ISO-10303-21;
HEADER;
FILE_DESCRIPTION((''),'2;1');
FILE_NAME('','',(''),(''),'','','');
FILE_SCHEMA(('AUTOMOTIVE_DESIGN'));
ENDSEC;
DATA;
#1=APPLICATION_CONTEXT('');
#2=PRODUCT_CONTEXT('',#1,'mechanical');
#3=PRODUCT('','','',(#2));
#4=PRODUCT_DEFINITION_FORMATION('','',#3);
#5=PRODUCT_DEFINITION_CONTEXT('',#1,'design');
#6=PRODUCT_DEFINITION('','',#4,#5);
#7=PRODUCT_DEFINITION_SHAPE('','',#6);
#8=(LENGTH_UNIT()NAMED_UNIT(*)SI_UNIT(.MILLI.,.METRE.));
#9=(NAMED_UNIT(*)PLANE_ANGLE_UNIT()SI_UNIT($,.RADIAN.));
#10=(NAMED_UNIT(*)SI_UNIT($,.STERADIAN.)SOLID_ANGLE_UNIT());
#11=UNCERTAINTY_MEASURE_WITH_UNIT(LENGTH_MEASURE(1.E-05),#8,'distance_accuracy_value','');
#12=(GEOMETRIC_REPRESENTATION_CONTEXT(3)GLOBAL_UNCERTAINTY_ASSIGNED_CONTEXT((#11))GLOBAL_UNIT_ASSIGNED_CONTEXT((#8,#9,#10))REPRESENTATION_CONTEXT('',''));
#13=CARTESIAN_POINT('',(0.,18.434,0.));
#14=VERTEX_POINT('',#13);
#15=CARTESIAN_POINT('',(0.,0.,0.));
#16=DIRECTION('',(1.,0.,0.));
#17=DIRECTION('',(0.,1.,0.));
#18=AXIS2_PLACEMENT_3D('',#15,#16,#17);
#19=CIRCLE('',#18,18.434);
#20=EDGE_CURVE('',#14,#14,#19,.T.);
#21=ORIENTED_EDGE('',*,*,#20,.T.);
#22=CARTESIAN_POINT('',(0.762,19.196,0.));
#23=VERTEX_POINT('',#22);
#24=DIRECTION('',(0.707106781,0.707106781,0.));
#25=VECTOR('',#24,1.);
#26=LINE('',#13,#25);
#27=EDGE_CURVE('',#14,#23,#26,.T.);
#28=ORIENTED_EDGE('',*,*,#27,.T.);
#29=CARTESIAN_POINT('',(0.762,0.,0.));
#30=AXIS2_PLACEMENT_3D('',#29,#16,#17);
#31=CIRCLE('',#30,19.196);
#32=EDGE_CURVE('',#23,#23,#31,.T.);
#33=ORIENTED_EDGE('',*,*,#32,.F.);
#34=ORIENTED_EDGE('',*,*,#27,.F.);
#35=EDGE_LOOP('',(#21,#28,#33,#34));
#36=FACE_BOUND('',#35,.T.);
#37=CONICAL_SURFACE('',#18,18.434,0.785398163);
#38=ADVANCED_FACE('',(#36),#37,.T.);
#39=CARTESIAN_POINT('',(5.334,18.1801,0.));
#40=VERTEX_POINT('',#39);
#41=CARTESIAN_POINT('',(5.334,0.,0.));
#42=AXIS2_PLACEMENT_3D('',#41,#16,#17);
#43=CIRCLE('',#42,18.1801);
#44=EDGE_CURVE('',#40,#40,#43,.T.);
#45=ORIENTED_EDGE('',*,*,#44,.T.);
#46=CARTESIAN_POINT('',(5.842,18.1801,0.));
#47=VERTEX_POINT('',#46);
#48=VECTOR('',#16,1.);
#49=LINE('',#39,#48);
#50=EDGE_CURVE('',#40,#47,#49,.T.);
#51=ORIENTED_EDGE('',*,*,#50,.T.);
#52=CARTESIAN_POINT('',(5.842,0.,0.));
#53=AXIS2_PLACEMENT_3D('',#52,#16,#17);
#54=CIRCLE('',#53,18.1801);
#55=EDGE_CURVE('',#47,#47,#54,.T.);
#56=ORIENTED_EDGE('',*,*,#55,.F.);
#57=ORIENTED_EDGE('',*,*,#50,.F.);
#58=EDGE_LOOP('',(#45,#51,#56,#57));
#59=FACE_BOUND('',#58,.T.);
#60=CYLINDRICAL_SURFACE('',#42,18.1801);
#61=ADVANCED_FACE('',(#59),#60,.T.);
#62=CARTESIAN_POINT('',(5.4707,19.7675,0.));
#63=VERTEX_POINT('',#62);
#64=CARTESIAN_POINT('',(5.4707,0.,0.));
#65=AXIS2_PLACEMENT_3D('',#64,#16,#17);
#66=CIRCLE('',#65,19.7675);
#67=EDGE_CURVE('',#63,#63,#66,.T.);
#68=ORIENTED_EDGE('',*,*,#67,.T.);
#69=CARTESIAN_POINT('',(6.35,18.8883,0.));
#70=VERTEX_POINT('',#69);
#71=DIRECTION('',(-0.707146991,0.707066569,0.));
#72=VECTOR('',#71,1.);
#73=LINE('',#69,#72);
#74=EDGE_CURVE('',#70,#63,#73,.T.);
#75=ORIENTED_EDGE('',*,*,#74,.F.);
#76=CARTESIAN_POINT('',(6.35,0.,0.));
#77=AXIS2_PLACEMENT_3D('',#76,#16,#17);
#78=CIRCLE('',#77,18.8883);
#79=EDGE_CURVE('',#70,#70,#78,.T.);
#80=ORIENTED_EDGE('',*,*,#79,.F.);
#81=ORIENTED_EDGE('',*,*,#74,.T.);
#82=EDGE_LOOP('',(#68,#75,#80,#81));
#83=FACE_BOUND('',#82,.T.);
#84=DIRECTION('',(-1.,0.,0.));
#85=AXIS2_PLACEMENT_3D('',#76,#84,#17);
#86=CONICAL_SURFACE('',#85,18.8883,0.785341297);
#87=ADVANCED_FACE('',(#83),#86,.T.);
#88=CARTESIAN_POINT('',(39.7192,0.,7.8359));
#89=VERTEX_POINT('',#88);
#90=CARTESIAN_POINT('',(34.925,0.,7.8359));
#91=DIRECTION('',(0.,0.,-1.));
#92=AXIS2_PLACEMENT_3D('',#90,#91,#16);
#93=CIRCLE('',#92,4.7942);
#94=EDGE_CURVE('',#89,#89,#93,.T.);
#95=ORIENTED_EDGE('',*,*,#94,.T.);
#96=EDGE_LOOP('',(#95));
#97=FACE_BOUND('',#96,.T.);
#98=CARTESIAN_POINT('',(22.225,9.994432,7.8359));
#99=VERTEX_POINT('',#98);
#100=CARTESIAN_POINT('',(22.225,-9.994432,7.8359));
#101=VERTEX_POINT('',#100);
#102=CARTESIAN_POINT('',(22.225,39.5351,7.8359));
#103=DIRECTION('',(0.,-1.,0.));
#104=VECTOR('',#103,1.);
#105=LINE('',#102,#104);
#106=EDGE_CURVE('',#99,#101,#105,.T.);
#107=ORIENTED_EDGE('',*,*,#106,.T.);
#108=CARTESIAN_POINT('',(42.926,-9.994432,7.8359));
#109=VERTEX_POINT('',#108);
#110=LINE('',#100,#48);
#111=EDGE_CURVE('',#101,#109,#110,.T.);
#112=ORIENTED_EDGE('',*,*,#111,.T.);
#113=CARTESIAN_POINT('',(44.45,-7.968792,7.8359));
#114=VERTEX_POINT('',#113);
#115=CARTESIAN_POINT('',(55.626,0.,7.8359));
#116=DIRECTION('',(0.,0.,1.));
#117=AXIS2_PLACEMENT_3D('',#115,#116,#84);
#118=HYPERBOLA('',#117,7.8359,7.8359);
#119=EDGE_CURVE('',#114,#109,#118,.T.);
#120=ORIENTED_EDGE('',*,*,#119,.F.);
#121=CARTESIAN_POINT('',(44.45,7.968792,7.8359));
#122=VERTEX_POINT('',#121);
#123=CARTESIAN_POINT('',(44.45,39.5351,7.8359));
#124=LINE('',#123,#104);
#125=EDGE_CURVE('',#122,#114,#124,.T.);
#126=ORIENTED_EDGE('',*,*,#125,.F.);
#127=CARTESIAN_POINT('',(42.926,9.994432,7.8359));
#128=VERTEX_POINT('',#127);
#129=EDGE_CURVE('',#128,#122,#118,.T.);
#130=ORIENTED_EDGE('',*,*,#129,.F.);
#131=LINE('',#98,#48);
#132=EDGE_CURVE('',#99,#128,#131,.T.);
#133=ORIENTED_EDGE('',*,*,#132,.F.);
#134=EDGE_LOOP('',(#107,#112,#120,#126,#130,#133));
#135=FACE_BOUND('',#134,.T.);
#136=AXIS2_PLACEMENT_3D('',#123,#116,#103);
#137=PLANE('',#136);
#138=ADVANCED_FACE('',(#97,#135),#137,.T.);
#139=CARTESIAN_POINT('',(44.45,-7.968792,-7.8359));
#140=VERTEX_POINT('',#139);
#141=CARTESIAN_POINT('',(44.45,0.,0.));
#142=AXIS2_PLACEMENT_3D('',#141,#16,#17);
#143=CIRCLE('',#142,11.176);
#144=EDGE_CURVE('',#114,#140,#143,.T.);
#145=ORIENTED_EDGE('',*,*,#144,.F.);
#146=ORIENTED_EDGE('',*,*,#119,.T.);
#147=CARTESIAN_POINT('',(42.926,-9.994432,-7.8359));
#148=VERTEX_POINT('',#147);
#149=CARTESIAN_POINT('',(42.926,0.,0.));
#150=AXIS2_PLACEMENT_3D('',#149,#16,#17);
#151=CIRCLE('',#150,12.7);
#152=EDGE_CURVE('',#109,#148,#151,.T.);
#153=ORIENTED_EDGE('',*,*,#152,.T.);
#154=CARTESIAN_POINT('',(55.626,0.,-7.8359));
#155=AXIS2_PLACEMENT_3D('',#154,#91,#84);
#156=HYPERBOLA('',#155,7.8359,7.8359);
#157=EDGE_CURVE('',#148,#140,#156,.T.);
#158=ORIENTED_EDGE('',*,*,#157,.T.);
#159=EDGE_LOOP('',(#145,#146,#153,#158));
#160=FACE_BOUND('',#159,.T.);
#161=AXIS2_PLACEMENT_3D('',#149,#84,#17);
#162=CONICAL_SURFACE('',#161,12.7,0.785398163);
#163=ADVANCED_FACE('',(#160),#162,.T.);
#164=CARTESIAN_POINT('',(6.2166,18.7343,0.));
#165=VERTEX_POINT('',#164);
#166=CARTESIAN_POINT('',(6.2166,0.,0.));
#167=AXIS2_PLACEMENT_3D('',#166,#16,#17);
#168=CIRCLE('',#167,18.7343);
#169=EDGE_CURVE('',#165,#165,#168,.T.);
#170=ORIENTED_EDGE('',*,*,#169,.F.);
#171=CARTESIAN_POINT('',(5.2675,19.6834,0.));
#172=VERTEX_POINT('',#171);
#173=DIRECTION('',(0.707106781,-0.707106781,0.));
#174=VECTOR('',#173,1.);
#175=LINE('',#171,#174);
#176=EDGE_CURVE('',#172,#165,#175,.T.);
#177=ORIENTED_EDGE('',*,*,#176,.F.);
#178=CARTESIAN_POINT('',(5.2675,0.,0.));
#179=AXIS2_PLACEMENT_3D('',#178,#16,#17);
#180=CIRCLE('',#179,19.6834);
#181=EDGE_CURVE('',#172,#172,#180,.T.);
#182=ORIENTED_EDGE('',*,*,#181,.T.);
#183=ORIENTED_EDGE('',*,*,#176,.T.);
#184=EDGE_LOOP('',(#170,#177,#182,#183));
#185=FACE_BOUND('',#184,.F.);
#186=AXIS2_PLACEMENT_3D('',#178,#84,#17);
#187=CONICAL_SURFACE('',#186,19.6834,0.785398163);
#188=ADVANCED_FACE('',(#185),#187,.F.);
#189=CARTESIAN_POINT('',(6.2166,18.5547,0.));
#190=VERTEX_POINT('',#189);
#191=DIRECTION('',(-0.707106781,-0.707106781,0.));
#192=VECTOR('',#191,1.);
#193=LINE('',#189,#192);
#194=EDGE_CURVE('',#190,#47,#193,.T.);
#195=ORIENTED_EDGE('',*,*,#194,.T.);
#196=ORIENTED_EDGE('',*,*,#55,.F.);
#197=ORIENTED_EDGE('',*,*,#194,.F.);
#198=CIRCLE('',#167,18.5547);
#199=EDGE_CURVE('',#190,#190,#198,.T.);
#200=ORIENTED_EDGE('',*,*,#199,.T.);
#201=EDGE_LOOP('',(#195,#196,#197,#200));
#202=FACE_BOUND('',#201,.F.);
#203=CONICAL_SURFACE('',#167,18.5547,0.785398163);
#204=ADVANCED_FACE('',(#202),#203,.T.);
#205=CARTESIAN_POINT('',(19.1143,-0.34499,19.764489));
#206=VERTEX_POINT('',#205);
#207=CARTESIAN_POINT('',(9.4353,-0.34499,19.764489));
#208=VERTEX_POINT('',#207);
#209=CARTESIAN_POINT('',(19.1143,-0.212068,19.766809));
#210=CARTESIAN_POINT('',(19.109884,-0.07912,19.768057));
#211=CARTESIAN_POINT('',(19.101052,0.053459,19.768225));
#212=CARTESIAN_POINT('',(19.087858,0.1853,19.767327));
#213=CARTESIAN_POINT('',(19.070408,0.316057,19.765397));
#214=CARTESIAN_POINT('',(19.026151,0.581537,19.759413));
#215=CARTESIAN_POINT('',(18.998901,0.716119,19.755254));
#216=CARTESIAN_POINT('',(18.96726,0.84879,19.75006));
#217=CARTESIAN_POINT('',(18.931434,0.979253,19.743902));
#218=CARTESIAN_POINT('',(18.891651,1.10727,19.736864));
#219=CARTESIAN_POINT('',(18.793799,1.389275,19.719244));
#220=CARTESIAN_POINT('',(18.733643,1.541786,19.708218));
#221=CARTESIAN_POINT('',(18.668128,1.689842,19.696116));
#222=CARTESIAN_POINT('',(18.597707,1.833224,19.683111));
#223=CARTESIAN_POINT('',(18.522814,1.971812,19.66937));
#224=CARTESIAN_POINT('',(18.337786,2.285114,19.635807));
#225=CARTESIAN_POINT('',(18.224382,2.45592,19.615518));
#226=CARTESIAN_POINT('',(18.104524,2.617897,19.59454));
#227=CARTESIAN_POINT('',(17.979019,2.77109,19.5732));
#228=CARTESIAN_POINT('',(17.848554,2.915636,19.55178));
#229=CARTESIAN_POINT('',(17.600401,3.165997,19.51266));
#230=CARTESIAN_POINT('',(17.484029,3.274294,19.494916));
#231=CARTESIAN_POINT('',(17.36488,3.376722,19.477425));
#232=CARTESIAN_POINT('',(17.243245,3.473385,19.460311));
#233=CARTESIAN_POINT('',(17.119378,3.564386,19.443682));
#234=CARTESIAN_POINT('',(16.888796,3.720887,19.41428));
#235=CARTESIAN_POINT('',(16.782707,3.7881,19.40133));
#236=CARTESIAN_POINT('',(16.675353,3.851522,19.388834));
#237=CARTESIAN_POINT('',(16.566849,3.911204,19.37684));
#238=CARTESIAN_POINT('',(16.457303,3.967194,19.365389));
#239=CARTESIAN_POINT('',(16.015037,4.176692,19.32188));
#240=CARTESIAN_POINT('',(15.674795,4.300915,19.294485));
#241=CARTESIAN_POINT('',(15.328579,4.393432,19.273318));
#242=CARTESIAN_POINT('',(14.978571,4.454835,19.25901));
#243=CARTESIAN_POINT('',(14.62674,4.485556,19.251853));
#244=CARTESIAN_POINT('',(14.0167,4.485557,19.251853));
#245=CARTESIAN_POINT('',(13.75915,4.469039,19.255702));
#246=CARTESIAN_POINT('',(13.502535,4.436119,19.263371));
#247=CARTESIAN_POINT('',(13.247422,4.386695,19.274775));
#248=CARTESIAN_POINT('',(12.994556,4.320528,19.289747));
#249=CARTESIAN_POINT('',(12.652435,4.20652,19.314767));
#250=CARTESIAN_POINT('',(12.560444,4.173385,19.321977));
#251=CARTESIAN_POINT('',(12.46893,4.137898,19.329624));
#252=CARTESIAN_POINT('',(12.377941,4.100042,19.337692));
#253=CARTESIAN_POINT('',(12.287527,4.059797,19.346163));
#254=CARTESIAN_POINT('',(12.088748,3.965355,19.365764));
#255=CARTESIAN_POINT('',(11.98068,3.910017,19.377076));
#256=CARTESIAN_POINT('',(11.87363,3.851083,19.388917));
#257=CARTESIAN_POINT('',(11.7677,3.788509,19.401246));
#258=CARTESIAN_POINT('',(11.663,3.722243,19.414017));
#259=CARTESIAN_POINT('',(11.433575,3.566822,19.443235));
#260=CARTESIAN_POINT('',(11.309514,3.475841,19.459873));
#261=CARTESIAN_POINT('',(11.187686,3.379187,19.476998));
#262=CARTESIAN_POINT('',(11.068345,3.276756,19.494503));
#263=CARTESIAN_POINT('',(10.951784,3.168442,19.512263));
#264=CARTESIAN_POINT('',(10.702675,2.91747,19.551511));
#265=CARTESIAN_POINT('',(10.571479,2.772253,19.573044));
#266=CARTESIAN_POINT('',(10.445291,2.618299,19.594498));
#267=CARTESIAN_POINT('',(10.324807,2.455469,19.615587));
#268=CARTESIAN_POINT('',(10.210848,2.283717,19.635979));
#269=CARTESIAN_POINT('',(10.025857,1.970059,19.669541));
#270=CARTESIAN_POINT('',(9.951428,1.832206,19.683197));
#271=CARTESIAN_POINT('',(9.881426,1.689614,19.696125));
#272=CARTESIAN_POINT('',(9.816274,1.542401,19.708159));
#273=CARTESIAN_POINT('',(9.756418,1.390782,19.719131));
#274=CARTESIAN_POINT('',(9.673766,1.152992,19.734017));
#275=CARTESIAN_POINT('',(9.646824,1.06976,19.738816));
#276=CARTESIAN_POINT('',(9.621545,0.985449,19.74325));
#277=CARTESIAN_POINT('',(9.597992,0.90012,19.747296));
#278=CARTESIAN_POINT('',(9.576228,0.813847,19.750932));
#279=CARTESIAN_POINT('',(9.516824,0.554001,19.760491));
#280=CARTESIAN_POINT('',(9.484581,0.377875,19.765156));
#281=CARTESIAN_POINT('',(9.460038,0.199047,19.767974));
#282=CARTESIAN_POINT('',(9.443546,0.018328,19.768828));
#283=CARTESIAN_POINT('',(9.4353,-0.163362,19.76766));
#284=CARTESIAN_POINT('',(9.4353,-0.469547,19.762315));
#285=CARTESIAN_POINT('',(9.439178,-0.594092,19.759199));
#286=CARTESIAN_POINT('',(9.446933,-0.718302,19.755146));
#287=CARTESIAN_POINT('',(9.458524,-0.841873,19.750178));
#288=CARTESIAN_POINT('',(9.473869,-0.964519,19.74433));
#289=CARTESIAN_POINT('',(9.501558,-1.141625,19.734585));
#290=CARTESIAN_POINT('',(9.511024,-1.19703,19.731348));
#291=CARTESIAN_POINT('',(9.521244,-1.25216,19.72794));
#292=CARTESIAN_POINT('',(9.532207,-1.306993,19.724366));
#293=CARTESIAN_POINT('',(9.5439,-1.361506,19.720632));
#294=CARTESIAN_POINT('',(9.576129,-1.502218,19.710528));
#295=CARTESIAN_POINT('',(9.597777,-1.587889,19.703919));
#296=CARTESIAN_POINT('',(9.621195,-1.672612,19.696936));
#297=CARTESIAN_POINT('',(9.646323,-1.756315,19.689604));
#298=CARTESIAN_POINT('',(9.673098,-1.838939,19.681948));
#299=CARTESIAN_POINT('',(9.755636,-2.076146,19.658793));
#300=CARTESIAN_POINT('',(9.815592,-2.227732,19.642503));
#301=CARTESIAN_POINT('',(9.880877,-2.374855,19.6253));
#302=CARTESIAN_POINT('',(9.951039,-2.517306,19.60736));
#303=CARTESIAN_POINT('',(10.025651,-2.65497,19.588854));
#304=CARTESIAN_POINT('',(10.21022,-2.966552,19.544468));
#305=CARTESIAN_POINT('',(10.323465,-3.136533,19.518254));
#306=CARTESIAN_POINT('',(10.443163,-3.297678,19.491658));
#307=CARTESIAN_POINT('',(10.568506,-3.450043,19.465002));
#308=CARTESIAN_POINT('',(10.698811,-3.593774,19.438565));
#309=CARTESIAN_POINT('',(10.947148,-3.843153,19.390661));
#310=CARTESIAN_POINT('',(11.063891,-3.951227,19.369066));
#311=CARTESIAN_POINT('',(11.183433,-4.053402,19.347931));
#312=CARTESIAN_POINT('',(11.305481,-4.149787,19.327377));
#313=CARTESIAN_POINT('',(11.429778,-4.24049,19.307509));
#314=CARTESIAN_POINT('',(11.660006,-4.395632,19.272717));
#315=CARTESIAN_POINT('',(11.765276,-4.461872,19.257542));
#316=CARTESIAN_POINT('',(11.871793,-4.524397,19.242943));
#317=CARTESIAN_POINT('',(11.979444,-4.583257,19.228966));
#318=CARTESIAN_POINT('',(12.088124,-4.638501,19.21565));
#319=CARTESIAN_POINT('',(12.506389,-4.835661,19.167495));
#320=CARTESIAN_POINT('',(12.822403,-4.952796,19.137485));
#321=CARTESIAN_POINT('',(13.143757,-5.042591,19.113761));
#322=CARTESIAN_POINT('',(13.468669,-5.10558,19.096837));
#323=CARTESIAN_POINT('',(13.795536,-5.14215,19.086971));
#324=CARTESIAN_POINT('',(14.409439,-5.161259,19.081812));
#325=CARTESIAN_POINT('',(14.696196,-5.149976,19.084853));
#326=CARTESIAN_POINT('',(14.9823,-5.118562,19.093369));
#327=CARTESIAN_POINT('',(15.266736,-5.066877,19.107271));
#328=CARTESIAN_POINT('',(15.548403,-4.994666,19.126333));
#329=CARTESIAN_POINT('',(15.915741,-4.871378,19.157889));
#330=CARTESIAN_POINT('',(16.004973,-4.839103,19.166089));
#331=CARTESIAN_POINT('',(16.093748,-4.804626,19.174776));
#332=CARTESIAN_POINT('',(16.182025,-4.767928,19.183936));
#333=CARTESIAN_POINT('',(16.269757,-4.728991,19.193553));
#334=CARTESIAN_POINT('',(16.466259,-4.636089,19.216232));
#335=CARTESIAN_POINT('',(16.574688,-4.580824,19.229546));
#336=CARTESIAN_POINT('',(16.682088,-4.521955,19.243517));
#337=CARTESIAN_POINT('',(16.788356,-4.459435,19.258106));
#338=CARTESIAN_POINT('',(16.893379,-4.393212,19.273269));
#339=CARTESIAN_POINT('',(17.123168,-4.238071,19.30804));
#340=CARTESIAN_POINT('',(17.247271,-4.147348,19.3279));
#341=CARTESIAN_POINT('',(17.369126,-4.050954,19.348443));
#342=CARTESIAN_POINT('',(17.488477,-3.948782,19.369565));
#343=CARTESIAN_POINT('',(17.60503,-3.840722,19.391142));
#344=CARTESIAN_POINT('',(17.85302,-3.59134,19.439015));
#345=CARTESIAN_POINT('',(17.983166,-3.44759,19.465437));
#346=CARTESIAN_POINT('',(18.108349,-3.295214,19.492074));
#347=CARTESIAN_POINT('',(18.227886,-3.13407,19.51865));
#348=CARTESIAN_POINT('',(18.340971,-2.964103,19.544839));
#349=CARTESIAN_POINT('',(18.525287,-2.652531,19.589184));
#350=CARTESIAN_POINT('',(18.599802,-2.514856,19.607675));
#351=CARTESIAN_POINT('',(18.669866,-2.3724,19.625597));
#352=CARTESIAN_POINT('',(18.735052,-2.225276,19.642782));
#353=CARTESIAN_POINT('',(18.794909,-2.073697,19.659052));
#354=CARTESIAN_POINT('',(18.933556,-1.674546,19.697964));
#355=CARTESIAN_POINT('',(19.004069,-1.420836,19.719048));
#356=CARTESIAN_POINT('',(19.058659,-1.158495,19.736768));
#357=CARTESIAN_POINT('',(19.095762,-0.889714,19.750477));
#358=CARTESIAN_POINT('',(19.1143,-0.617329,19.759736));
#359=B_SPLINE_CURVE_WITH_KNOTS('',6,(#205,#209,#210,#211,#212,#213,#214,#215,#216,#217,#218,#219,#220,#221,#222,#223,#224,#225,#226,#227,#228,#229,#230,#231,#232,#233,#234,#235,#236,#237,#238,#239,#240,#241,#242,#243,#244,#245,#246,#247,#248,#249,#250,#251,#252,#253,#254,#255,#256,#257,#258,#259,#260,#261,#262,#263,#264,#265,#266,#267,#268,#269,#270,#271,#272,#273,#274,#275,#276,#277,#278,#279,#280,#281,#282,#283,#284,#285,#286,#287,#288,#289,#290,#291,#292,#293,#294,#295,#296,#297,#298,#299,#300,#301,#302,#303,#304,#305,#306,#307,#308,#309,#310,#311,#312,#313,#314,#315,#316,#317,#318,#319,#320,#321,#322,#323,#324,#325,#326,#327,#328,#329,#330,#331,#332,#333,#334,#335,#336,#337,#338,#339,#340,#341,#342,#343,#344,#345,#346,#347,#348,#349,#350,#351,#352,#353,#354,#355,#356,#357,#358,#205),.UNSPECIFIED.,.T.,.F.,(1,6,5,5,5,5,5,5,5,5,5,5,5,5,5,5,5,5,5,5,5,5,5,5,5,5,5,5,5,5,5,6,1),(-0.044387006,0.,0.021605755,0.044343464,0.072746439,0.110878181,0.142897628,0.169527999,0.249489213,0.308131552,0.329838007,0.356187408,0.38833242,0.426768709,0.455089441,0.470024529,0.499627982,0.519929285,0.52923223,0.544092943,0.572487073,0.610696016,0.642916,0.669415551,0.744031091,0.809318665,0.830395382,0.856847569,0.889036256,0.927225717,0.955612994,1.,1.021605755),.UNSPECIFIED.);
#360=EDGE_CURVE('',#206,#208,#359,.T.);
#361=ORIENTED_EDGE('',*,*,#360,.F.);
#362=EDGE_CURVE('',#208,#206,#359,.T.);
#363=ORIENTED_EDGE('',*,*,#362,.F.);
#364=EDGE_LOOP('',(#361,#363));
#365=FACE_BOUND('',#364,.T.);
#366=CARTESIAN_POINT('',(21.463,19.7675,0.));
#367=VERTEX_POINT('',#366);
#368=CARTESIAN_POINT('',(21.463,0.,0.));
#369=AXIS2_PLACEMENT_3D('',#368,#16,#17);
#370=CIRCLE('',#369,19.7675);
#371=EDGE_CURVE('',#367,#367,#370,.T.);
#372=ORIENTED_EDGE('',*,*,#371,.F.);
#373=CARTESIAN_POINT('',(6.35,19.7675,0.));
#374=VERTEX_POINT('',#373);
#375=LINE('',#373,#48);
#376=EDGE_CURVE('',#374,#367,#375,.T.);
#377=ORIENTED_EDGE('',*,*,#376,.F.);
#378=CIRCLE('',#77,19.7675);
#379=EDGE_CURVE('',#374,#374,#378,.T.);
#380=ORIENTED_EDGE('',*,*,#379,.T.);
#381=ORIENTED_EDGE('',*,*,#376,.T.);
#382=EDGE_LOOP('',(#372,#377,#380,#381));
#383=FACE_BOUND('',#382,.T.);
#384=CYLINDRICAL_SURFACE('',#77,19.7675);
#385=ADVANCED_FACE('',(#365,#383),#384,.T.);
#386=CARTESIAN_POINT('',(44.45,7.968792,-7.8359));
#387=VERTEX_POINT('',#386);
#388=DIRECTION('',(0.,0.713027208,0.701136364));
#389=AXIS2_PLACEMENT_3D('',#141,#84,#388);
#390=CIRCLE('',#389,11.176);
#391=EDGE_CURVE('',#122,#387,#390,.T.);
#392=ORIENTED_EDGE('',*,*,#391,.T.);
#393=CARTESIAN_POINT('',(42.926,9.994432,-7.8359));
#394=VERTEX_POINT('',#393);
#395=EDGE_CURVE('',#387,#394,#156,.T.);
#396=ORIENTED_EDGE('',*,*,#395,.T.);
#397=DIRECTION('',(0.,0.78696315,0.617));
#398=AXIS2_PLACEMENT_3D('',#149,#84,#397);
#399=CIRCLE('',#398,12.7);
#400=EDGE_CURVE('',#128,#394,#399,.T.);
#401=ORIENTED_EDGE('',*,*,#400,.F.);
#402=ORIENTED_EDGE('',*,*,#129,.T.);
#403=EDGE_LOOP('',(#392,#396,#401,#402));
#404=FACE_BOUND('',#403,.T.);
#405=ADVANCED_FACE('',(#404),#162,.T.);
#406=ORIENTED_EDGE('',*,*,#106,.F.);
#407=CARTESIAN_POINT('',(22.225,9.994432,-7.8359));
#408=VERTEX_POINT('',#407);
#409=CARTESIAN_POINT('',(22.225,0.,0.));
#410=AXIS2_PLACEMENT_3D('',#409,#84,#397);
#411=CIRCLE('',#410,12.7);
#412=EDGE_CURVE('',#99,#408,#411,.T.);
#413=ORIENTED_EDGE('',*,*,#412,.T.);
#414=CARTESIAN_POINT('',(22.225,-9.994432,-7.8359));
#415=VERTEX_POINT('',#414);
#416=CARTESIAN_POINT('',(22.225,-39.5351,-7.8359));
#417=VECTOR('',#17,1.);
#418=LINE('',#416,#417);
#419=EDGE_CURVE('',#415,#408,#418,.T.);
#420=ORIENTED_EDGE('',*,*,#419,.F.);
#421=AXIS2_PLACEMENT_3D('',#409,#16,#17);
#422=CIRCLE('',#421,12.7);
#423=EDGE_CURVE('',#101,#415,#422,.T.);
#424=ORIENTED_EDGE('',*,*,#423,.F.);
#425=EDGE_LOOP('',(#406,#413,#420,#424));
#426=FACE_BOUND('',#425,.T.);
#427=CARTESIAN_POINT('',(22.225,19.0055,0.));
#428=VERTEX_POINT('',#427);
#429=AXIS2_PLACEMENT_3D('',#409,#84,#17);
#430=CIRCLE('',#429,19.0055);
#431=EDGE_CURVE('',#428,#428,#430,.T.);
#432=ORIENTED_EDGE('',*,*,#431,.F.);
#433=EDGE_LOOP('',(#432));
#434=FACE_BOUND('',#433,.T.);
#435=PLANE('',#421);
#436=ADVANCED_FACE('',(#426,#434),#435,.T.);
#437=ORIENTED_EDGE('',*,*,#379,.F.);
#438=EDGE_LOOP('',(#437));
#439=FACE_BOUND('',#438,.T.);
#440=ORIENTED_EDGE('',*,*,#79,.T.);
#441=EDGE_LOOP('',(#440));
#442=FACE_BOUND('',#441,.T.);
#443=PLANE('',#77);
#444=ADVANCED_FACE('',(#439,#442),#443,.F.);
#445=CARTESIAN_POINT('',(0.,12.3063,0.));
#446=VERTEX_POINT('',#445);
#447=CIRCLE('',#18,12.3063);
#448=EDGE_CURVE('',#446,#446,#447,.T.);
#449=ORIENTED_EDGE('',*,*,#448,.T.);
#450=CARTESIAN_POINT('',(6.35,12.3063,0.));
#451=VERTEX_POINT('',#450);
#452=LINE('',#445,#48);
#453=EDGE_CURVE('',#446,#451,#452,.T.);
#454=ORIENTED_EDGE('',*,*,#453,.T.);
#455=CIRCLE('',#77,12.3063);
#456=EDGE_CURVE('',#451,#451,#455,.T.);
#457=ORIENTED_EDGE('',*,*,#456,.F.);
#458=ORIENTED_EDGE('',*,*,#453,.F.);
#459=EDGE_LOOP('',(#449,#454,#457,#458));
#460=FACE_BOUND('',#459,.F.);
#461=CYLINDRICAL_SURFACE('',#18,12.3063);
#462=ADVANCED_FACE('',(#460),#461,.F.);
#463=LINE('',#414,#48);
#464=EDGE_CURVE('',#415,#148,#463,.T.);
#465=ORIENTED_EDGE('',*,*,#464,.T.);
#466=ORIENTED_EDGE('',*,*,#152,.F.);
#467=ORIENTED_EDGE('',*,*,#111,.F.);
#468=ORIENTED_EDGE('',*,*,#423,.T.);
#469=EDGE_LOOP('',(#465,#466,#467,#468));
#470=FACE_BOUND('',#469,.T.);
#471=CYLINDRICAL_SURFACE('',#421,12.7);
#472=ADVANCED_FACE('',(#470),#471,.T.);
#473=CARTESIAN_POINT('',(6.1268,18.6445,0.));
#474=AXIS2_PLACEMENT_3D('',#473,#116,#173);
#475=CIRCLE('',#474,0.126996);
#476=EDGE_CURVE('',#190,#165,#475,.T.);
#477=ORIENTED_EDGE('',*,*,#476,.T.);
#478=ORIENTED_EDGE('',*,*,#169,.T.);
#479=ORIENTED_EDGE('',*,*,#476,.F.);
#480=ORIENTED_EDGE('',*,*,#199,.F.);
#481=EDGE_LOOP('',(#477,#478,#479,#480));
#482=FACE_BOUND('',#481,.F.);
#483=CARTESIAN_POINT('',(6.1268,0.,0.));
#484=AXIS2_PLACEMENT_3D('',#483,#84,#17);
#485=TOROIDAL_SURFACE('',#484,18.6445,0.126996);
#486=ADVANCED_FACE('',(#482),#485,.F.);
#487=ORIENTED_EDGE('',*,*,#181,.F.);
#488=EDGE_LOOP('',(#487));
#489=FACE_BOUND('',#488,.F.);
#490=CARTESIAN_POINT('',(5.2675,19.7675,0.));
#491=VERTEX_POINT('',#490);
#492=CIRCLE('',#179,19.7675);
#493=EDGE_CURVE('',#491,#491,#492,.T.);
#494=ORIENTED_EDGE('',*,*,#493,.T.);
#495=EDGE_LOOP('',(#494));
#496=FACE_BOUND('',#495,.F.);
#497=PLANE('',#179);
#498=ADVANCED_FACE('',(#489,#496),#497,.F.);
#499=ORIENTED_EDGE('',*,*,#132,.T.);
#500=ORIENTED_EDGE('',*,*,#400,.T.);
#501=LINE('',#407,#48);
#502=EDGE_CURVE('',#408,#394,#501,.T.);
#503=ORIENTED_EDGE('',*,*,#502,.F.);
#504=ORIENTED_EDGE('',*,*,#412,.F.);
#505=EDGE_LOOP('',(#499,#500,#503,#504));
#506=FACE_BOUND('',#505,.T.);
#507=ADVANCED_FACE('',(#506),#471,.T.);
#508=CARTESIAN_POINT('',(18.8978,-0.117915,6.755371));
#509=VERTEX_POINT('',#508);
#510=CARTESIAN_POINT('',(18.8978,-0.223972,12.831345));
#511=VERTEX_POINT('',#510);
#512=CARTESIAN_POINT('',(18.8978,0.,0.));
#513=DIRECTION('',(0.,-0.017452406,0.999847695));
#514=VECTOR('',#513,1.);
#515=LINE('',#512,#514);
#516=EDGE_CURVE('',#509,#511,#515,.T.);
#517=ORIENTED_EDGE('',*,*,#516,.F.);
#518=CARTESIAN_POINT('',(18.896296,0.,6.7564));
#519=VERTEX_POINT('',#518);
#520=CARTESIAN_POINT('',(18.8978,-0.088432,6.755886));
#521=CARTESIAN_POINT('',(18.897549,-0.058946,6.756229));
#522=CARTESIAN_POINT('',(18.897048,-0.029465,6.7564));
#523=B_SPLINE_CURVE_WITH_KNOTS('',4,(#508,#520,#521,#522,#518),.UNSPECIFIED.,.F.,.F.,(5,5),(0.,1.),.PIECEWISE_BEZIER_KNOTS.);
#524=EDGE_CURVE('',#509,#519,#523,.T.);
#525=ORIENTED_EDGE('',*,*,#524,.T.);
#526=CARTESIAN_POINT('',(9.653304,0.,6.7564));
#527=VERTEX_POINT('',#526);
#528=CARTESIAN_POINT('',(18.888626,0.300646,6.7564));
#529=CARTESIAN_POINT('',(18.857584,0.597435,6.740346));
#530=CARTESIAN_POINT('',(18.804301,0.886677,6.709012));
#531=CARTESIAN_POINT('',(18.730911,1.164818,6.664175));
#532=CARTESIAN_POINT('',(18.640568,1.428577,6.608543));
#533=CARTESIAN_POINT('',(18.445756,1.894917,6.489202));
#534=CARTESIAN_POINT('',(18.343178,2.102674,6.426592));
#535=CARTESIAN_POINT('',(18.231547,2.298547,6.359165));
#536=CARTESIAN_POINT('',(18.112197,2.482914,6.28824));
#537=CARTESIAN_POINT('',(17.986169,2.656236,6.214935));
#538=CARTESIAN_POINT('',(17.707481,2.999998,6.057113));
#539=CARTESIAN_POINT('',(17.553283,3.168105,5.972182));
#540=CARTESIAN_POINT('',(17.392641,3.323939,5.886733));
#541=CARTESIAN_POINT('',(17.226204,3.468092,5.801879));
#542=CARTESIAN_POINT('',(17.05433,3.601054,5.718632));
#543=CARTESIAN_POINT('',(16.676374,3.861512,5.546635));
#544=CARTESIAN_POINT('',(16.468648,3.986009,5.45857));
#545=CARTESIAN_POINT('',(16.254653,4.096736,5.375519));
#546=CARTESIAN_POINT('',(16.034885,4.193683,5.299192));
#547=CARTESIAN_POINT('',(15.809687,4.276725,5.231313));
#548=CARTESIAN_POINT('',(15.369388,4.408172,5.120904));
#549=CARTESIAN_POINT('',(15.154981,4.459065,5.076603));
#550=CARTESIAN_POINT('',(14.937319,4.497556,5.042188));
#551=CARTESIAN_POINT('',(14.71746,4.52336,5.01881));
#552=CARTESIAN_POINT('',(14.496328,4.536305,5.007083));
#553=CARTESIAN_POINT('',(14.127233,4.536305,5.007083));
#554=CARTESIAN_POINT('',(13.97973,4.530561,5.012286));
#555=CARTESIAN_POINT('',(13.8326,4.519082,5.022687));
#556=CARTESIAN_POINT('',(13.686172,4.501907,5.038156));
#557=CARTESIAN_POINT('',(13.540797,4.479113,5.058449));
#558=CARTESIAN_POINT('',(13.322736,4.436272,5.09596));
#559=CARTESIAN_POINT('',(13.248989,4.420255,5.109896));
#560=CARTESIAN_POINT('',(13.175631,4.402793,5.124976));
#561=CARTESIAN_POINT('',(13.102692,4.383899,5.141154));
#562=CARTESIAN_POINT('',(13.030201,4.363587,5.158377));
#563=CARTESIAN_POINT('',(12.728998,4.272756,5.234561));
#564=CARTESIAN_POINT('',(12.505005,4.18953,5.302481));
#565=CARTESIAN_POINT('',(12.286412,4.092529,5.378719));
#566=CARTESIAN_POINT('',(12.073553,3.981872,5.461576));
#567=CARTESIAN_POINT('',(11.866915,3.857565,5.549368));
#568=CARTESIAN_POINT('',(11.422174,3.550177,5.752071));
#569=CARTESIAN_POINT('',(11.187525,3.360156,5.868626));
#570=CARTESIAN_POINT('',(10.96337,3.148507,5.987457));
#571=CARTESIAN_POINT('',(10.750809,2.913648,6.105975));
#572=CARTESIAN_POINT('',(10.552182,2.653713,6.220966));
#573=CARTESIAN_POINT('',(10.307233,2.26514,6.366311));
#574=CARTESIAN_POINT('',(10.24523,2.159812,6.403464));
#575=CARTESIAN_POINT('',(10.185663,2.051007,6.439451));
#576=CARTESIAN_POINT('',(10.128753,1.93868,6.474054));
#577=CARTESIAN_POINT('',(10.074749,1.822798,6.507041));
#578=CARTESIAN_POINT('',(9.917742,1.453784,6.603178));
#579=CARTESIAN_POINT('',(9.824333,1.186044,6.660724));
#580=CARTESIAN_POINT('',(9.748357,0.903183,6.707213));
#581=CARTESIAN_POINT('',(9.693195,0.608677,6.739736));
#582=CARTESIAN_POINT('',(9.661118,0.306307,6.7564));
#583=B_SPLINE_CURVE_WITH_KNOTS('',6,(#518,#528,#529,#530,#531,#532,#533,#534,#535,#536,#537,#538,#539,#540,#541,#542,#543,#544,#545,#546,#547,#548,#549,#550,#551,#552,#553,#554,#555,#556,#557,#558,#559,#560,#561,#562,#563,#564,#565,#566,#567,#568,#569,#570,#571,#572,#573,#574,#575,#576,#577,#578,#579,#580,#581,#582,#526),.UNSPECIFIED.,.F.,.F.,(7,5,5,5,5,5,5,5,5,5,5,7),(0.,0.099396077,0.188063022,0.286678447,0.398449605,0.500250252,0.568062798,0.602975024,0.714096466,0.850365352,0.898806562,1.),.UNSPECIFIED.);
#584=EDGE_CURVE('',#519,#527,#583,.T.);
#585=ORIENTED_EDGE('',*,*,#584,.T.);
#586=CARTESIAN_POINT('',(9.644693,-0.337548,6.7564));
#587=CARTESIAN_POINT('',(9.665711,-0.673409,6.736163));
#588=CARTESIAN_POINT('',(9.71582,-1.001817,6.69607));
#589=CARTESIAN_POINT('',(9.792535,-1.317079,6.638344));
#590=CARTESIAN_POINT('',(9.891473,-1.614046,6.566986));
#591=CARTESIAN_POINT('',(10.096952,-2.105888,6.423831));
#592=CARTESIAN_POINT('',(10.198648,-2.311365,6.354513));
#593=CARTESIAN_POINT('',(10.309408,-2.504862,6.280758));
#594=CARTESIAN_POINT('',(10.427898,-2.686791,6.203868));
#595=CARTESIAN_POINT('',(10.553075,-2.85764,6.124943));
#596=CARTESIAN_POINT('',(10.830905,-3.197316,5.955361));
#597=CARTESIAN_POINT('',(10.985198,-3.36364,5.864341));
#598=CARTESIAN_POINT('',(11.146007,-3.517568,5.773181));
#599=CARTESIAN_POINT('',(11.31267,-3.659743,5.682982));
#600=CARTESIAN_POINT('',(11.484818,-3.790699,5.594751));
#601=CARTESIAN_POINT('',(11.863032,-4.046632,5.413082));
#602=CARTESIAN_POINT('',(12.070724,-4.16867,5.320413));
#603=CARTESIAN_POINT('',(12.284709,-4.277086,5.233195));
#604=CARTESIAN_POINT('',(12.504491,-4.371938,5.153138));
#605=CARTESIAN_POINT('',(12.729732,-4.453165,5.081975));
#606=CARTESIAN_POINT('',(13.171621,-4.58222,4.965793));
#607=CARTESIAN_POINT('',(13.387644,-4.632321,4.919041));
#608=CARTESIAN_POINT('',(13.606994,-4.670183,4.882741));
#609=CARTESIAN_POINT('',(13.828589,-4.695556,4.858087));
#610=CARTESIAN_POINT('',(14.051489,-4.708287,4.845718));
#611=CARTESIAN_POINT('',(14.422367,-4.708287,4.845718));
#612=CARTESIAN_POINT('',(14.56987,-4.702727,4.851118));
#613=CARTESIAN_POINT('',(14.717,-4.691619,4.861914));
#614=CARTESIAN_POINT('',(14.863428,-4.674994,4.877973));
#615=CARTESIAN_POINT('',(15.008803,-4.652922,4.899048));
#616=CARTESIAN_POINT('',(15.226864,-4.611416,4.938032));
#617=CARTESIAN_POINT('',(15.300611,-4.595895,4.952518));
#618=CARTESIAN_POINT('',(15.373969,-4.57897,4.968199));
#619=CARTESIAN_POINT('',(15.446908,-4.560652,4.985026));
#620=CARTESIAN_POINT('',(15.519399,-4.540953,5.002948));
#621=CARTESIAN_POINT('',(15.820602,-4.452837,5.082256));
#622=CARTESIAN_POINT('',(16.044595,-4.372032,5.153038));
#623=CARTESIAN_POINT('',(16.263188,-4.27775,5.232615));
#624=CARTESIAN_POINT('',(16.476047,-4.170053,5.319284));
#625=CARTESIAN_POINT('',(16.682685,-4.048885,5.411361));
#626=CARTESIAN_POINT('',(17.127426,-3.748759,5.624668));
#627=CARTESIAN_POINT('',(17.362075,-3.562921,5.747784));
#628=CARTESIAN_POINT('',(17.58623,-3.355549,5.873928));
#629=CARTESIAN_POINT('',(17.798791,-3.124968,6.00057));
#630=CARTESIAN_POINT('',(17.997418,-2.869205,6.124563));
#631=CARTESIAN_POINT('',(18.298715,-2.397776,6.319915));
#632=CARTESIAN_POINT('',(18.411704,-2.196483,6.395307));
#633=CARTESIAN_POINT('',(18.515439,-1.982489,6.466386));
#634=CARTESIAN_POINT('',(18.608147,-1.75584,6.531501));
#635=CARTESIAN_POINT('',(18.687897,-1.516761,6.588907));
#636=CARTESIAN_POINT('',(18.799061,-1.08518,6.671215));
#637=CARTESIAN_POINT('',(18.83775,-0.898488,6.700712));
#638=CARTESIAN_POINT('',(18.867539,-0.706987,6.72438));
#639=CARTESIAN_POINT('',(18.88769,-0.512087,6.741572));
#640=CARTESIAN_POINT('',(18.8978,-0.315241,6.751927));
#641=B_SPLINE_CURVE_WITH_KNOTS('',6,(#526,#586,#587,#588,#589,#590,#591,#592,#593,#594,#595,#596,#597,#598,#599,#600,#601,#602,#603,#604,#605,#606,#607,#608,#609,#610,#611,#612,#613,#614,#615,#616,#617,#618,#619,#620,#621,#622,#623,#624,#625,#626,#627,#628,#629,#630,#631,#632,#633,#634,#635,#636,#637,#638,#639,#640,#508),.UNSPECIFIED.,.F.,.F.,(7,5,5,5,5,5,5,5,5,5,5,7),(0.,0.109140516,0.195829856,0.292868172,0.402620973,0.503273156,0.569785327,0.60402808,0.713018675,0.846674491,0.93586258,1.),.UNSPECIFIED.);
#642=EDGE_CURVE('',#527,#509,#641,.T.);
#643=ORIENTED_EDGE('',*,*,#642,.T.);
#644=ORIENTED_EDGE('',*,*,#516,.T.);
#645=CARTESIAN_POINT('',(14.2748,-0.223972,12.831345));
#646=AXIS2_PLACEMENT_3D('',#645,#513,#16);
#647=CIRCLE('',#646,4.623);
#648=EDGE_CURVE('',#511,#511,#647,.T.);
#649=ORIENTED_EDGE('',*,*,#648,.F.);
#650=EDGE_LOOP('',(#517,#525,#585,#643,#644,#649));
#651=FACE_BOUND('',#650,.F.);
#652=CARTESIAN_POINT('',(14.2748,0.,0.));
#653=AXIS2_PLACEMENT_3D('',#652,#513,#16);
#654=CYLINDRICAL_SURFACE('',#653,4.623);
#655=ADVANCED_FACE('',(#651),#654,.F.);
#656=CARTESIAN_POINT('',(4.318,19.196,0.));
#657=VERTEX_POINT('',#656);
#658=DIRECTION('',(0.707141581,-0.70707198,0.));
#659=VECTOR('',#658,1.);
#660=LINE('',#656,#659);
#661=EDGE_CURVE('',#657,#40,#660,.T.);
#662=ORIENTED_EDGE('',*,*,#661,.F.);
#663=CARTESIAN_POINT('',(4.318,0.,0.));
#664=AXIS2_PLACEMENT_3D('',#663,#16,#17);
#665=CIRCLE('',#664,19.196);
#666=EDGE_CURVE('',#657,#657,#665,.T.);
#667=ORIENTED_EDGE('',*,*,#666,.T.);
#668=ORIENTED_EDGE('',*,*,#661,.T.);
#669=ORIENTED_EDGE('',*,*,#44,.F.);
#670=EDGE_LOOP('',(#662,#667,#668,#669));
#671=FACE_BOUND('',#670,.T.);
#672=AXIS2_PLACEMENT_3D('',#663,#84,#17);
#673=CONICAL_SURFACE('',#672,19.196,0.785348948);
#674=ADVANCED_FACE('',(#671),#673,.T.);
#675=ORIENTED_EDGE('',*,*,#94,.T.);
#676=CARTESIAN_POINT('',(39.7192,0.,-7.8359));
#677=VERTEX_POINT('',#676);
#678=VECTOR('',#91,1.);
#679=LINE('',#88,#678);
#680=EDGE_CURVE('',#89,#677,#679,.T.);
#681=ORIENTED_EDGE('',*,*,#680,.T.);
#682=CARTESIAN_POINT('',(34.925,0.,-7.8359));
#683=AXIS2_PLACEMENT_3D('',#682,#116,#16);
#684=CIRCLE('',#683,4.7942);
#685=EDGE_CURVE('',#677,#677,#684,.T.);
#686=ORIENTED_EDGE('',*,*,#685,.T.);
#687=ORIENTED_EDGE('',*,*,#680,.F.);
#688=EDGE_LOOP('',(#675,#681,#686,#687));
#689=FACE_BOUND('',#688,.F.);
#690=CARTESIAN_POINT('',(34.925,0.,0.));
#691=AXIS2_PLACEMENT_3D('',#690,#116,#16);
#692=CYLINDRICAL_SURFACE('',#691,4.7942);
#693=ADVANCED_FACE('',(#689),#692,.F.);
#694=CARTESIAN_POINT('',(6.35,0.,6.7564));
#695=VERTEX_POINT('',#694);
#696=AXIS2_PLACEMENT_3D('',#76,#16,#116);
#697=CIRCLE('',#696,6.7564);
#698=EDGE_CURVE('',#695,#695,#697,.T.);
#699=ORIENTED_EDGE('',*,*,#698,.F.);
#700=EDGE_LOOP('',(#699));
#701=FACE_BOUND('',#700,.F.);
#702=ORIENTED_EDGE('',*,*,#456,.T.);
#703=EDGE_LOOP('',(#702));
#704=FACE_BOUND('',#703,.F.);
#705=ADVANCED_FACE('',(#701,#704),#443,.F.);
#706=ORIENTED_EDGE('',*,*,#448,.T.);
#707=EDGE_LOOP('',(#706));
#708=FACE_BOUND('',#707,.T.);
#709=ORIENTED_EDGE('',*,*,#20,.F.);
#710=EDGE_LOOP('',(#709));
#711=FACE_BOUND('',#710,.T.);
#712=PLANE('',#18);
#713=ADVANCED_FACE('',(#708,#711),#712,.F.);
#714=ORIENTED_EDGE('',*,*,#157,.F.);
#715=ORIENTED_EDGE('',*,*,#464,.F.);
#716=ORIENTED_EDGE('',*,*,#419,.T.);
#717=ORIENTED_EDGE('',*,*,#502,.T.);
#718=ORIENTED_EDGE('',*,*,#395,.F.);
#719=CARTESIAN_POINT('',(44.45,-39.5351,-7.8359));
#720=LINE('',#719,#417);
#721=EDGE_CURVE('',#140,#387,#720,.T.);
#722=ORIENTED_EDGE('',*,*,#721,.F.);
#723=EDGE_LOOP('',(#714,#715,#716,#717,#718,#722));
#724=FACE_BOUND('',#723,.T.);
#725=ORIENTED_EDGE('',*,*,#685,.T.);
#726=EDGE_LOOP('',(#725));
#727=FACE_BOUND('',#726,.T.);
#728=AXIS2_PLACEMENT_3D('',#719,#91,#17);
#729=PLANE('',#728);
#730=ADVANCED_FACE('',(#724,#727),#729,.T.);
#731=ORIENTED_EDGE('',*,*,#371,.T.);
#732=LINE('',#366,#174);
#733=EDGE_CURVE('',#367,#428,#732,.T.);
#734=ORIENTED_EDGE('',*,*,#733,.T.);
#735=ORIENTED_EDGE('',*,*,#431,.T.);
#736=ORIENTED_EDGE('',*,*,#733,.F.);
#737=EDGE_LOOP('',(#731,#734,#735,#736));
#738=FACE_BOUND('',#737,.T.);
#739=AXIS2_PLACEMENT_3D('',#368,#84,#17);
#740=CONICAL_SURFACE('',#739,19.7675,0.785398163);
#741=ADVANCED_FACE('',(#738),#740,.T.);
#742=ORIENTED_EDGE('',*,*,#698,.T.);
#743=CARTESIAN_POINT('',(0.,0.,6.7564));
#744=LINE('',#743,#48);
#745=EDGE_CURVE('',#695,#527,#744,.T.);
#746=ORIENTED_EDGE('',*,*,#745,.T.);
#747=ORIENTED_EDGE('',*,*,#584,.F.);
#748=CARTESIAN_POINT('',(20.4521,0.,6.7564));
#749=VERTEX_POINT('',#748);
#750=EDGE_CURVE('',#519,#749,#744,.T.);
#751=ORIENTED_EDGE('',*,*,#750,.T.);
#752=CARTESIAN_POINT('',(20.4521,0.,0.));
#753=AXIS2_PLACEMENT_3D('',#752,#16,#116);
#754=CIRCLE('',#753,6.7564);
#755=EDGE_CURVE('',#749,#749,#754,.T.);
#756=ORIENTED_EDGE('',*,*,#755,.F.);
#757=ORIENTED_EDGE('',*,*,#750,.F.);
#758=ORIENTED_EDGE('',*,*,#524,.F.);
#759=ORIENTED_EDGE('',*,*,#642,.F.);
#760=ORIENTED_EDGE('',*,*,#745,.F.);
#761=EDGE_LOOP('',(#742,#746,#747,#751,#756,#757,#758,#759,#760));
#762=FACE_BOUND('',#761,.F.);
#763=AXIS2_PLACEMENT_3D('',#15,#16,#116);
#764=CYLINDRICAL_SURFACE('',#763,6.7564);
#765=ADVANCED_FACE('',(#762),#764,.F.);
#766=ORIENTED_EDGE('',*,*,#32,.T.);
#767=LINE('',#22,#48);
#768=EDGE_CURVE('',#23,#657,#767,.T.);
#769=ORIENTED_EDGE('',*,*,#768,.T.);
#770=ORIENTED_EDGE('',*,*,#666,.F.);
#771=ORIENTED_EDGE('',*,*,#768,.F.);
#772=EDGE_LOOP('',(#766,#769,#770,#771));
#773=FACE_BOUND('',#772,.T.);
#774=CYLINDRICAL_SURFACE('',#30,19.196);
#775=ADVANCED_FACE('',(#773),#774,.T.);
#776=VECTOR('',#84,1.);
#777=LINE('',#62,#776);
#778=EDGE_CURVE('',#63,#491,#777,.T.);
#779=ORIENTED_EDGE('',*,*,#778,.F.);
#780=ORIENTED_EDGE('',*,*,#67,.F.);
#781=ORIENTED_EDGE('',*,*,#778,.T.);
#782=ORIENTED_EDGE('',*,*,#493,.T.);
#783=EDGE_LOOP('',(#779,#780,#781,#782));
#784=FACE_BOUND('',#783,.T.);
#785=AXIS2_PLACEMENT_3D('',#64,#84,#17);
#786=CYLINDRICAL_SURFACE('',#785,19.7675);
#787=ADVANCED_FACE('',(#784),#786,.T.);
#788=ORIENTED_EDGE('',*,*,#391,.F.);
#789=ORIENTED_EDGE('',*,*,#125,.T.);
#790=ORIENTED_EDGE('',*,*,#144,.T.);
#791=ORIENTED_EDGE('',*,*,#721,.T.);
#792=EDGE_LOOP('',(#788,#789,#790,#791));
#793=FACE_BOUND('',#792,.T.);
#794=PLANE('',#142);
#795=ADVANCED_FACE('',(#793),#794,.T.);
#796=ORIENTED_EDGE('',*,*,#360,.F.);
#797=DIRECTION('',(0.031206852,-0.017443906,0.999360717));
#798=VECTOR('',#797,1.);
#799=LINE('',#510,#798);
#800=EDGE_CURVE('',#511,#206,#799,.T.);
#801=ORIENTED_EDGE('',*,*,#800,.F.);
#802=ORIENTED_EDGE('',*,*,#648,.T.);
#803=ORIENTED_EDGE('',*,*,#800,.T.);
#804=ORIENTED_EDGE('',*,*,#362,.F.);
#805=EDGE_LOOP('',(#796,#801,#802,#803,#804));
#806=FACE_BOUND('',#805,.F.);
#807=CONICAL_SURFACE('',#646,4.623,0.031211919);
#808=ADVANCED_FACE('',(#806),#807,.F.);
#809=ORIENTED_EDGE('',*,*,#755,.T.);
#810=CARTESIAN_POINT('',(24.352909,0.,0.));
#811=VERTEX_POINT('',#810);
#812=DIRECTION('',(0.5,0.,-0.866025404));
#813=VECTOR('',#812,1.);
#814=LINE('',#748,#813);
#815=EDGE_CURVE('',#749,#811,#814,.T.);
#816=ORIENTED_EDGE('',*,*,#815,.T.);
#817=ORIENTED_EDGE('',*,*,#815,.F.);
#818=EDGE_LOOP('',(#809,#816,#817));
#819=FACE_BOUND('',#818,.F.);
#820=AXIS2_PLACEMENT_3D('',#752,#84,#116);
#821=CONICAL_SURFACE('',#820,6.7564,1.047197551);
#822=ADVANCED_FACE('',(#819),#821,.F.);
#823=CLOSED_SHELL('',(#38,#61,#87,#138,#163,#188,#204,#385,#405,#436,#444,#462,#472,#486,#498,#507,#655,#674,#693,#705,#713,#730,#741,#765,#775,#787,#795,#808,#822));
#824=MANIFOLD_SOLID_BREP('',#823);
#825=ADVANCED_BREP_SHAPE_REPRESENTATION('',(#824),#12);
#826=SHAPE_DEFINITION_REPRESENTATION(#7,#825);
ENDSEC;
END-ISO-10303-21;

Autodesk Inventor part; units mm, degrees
sketch "Sketch_18" plane through (0, 0, 0) normal (0, 0, 1) x (1, 0, 0)
  line L0 (22.225, 0) -> (0, 0)
  line L1 (0, 0) -> (0, 18.434)
  line L2 (0, 18.434) -> (0.762, 19.196)
  line L3 (0.762, 19.196) -> (4.318, 19.196)
  line L4 (4.318, 19.196) -> (5.334, 18.1801)
  line L5 (5.334, 18.1801) -> (6.35, 18.1801)
  line L6 (6.35, 18.1801) -> (6.35, 19.7675)
  line L7 (6.35, 19.7675) -> (21.463, 19.7675)
  line L8 (21.463, 19.7675) -> (22.225, 19.0055)
  line L9 (22.225, 19.0055) -> (22.225, 0)
  line L10 (22.225, 0) -> (0, 0)
revolve "Revolution1" add sketch "Sketch_18" angle 360 about axis through (22.225, 0, 0) along (1, 0, 0)
sketch "Sketch_21" plane through (0, 0, 0) normal (0, 0, 1) x (1, 0, 0)
  line L0 (44.45, 0) -> (22.225, 0)
  line L1 (22.225, 0) -> (22.225, 12.7)
  line L2 (22.225, 12.7) -> (42.926, 12.7)
  line L3 (42.926, 12.7) -> (44.45, 11.176)
  line L4 (44.45, 11.176) -> (44.45, 0)
  line L5 (44.45, 0) -> (22.225, 0)
revolve "Revolution2" add sketch "Sketch_21" angle 360 about axis through (44.45, 0, 0) along (1, 0, 0)
sketch "Sketch_9" plane through (44.45, 0, 0) normal (1, 0, 0) x (0, 0, -1)
  line L0 (-39.5351, -79.0702) -> (39.5351, -79.0702)
  line L1 (39.5351, -79.0702) -> (39.5351, 79.0702)
  line L2 (39.5351, 79.0702) -> (-39.5351, 79.0702)
  line L3 (-39.5351, 79.0702) -> (-39.5351, -79.0702)
  line L4 (-7.8359, -39.5351) -> (7.8359, -39.5351)
  line L5 (7.8359, -39.5351) -> (7.8359, 39.5351)
  line L6 (7.8359, 39.5351) -> (-7.8359, 39.5351)
  line L7 (-7.8359, 39.5351) -> (-7.8359, -39.5351)
extrude "Extrusion1" cut sketch "Sketch_9" against normal blind 22.225
sketch "Sketch4" plane through (0, 0, 0) normal (-1, 0, 0) x (0, 0, 1)
  point P0 (0, 0)
hole "Hole1" at (0, 0, 0) direction (1, 0, 0) diameter 13.5128 depth 20.4521 tip angle 120
sketch "Sketch_68" plane through (0, 0, 0) normal (0, 0.9998477, 0.0174524) x (1, 0, 0)
  line L0 (14.2748, -19.7675) -> (14.2748, 0)
  line L1 (14.2748, 0) -> (18.8978, 0)
  line L2 (18.8978, 0) -> (18.8978, -12.8333)
  line L3 (18.8978, -12.8333) -> (19.1143, -19.7675)
  line L4 (19.1143, -19.7675) -> (14.2748, -19.7675)
  line L5 (14.2748, -19.7675) -> (14.2748, 0)
revolve "Revolution3" cut sketch "Sketch_68" angle 360 about axis through (14.2748, -0.345, 19.7645) along (0, -0.0174524, 0.9998477)
thread "Thread1" size "1/8" designation "1/8 - 27 NPT" standard "NPT" length 6.9376
sketch "Sketch_20" plane through (0, 0, 0) normal (0, 0, 1) x (1, 0, 0)
  line L0 (6.35, 0) -> (0, 0)
  line L1 (0, 0) -> (0, 12.3063)
  line L2 (0, 12.3063) -> (6.35, 12.3063)
  line L3 (6.35, 12.3063) -> (6.35, 0)
  line L4 (6.35, 0) -> (0, 0)
revolve "Revolution4" cut sketch "Sketch_20" angle 360 about axis through (6.35, 0, 0) along (1, 0, 0)
sketch "Sketch_24" plane through (0, 0, 0) normal (0, 0, 1) x (1, 0, 0)
  line L0 (6.35, 0) -> (5.334, 0)
  line L1 (5.2675, 19.7675) -> (5.2675, 19.6834)
  line L2 (5.2675, 19.6834) -> (6.2166, 18.7343)
  arc A0 (6.2166, 18.5547) -> (6.2166, 18.7343) centre (6.1268, 18.6445) ccw
  line L3 (6.2166, 18.5547) -> (5.842, 18.1801)
  line L4 (5.842, 18.1801) -> (5.334, 18.1801)
  line L5 (5.334, 18.1801) -> (5.334, 17.9261)
  line L6 (5.334, 17.9261) -> (6.35, 17.9261)
  line L7 (6.35, 17.9261) -> (6.35, 18.8883)
  line L8 (6.35, 18.8883) -> (5.4707, 19.7675)
  line L9 (5.4707, 19.7675) -> (5.2675, 19.7675)
revolve "Revolution5" add sketch "Sketch_24" angle 360 about axis through (6.35, 0, 0) along (1, 0, 0)
sketch "Sketch_43" plane through (0, 0, 0) normal (0, 0, 1) x (1, 0, 0)
  circle A0 centre (34.925, 0) radius 4.7942
extrude "Extrusion2" cut sketch "Sketch_43" along normal mid plane 23.5077
ref_plane "f_XY" through (22.225, 0, 0) normal (0, 0, 1) x (1, 0, 0)
ref_plane "f_YZ" through (22.225, 0, 0) normal (1, 0, 0) x (0, 1, 0)
ref_plane "f_ZX" through (22.225, 0, 0) normal (0, 1, 0) x (0, 0, 1)
ref_plane "lovra1_XY" through (38.1, 0, 0) normal (1, 0, 0) x (0, 0, -1)
ref_plane "lovra1_YZ" through (38.1, 0, 0) normal (0, 0, -1) x (0, 1, 0)
ref_plane "lovra1_ZX" through (38.1, 0, 0) normal (0, 1, 0) x (1, 0, 0)
ref_plane "lovra2_XY" through (38.1, 11.049, 0) normal (1, 0, 0) x (0, 0, -1)
ref_plane "lovra2_YZ" through (38.1, 11.049, 0) normal (0, 0, -1) x (0, 1, 0)
ref_plane "lovra2_ZX" through (38.1, 11.049, 0) normal (0, 1, 0) x (1, 0, 0)
ref_plane "lovra21_XY" through (0, 0, 5.2705) normal (1, 0, 0) x (0, 0, -1)
ref_plane "lovra21_YZ" through (0, 0, 5.2705) normal (0, 0, -1) x (0, 1, 0)
ref_plane "lovra21_ZX" through (0, 0, 5.2705) normal (0, 1, 0) x (1, 0, 0)
ref_plane "lovra22_XY" through (0, 0, -5.2705) normal (1, 0, 0) x (0, 0, -1)
ref_plane "lovra22_YZ" through (0, 0, -5.2705) normal (0, 0, -1) x (0, 1, 0)
ref_plane "lovra22_ZX" through (0, 0, -5.2705) normal (0, 1, 0) x (1, 0, 0)
ref_plane "lovra3_XY" through (38.1, -11.049, 0) normal (1, 0, 0) x (0, 0, -1)
ref_plane "lovra3_YZ" through (38.1, -11.049, 0) normal (0, 0, -1) x (0, 1, 0)
ref_plane "lovra3_ZX" through (38.1, -11.049, 0) normal (0, 1, 0) x (1, 0, 0)
ref_plane "olen_XY" through (34.925, 0, 0) normal (1, 0, 0) x (0, 0, -1)
ref_plane "olen_YZ" through (34.925, 0, 0) normal (0, 0, -1) x (0, 1, 0)
ref_plane "olen_ZX" through (34.925, 0, 0) normal (0, 1, 0) x (1, 0, 0)
ref_plane "p1_XY" through (44.45, 0, 7.8359) normal (1, 0, 0) x (0, 0, -1)
ref_plane "p1_YZ" through (44.45, 0, 7.8359) normal (0, 0, -1) x (0, 1, 0)
ref_plane "p1_ZX" through (44.45, 0, 7.8359) normal (0, 1, 0) x (1, 0, 0)
ref_plane "p2_XY" through (44.45, 0, -7.8359) normal (1, 0, 0) x (0, 0, -1)
ref_plane "p2_YZ" through (44.45, 0, -7.8359) normal (0, 0, -1) x (0, 1, 0)
ref_plane "p2_ZX" through (44.45, 0, -7.8359) normal (0, 1, 0) x (1, 0, 0)
ref_plane "port_XY" through (14.2748, 0, 0) normal (0, 0, 1) x (1, 0, 0)
ref_plane "port_YZ" through (14.2748, 0, 0) normal (1, 0, 0) x (0, 1, 0)
ref_plane "port_ZX" through (14.2748, 0, 0) normal (0, 1, 0) x (0, 0, 1)
ref_plane "port2_XY" through (44.45, 0, 0) normal (1, 0, 0) x (0, 0, -1)
ref_plane "port2_YZ" through (44.45, 0, 0) normal (0, 0, -1) x (0, 1, 0)
ref_plane "port2_ZX" through (44.45, 0, 0) normal (0, 1, 0) x (1, 0, 0)
ref_plane "thd1_XY" through (44.45, 0, 0) normal (1, 0, 0) x (0, 0, -1)
ref_plane "thd1_YZ" through (44.45, 0, 0) normal (0, 0, -1) x (0, 1, 0)
ref_plane "thd1_ZX" through (44.45, 0, 0) normal (0, 1, 0) x (1, 0, 0)
ref_plane "thd2_XY" through (44.45, 0, 0) normal (1, 0, 0) x (0, 0, -1)
ref_plane "thd2_YZ" through (44.45, 0, 0) normal (0, 0, -1) x (0, 1, 0)
ref_plane "thd2_ZX" through (44.45, 0, 0) normal (0, 1, 0) x (1, 0, 0)
ref_plane "to_mounting_bracket_XY" through (22.225, 0, 0) normal (1, 0, 0) x (0, 0, -1)
ref_plane "to_mounting_bracket_YZ" through (22.225, 0, 0) normal (0, 0, -1) x (0, 1, 0)
ref_plane "to_mounting_bracket_ZX" through (22.225, 0, 0) normal (0, 1, 0) x (1, 0, 0)
ref_plane "to_nut_XY" through (0, 0, 0) normal (1, 0, 0) x (0, 0, -1)
ref_plane "to_nut_YZ" through (0, 0, 0) normal (0, 0, -1) x (0, 1, 0)
ref_plane "to_nut_ZX" through (0, 0, 0) normal (0, 1, 0) x (1, 0, 0)
ref_plane "to_pin_XY" through (34.925, 0, 0) normal (0, 0, 1) x (1, 0, 0)
ref_plane "to_pin_YZ" through (34.925, 0, 0) normal (1, 0, 0) x (0, 1, 0)
ref_plane "to_pin_ZX" through (34.925, 0, 0) normal (0, 1, 0) x (0, 0, 1)
ref_plane "to_screw_XY" through (14.2748, 14.2875, -10.0838) normal (0, 1, 0) x (1, 0, 0)
ref_plane "to_screw_YZ" through (14.2748, 14.2875, -10.0838) normal (1, 0, 0) x (0, 0, -1)
ref_plane "to_screw_ZX" through (14.2748, 14.2875, -10.0838) normal (0, 0, -1) x (0, 1, 0)
ref_plane "to_tube_XY" through (5.334, 0, 0) normal (1, 0, 0) x (0, 0, -1)
ref_plane "to_tube_YZ" through (5.334, 0, 0) normal (0, 0, -1) x (0, 1, 0)
ref_plane "to_tube_ZX" through (5.334, 0, 0) normal (0, 1, 0) x (1, 0, 0)
properties part number "17P0000_rear_head" material "Aluminum 6061"
